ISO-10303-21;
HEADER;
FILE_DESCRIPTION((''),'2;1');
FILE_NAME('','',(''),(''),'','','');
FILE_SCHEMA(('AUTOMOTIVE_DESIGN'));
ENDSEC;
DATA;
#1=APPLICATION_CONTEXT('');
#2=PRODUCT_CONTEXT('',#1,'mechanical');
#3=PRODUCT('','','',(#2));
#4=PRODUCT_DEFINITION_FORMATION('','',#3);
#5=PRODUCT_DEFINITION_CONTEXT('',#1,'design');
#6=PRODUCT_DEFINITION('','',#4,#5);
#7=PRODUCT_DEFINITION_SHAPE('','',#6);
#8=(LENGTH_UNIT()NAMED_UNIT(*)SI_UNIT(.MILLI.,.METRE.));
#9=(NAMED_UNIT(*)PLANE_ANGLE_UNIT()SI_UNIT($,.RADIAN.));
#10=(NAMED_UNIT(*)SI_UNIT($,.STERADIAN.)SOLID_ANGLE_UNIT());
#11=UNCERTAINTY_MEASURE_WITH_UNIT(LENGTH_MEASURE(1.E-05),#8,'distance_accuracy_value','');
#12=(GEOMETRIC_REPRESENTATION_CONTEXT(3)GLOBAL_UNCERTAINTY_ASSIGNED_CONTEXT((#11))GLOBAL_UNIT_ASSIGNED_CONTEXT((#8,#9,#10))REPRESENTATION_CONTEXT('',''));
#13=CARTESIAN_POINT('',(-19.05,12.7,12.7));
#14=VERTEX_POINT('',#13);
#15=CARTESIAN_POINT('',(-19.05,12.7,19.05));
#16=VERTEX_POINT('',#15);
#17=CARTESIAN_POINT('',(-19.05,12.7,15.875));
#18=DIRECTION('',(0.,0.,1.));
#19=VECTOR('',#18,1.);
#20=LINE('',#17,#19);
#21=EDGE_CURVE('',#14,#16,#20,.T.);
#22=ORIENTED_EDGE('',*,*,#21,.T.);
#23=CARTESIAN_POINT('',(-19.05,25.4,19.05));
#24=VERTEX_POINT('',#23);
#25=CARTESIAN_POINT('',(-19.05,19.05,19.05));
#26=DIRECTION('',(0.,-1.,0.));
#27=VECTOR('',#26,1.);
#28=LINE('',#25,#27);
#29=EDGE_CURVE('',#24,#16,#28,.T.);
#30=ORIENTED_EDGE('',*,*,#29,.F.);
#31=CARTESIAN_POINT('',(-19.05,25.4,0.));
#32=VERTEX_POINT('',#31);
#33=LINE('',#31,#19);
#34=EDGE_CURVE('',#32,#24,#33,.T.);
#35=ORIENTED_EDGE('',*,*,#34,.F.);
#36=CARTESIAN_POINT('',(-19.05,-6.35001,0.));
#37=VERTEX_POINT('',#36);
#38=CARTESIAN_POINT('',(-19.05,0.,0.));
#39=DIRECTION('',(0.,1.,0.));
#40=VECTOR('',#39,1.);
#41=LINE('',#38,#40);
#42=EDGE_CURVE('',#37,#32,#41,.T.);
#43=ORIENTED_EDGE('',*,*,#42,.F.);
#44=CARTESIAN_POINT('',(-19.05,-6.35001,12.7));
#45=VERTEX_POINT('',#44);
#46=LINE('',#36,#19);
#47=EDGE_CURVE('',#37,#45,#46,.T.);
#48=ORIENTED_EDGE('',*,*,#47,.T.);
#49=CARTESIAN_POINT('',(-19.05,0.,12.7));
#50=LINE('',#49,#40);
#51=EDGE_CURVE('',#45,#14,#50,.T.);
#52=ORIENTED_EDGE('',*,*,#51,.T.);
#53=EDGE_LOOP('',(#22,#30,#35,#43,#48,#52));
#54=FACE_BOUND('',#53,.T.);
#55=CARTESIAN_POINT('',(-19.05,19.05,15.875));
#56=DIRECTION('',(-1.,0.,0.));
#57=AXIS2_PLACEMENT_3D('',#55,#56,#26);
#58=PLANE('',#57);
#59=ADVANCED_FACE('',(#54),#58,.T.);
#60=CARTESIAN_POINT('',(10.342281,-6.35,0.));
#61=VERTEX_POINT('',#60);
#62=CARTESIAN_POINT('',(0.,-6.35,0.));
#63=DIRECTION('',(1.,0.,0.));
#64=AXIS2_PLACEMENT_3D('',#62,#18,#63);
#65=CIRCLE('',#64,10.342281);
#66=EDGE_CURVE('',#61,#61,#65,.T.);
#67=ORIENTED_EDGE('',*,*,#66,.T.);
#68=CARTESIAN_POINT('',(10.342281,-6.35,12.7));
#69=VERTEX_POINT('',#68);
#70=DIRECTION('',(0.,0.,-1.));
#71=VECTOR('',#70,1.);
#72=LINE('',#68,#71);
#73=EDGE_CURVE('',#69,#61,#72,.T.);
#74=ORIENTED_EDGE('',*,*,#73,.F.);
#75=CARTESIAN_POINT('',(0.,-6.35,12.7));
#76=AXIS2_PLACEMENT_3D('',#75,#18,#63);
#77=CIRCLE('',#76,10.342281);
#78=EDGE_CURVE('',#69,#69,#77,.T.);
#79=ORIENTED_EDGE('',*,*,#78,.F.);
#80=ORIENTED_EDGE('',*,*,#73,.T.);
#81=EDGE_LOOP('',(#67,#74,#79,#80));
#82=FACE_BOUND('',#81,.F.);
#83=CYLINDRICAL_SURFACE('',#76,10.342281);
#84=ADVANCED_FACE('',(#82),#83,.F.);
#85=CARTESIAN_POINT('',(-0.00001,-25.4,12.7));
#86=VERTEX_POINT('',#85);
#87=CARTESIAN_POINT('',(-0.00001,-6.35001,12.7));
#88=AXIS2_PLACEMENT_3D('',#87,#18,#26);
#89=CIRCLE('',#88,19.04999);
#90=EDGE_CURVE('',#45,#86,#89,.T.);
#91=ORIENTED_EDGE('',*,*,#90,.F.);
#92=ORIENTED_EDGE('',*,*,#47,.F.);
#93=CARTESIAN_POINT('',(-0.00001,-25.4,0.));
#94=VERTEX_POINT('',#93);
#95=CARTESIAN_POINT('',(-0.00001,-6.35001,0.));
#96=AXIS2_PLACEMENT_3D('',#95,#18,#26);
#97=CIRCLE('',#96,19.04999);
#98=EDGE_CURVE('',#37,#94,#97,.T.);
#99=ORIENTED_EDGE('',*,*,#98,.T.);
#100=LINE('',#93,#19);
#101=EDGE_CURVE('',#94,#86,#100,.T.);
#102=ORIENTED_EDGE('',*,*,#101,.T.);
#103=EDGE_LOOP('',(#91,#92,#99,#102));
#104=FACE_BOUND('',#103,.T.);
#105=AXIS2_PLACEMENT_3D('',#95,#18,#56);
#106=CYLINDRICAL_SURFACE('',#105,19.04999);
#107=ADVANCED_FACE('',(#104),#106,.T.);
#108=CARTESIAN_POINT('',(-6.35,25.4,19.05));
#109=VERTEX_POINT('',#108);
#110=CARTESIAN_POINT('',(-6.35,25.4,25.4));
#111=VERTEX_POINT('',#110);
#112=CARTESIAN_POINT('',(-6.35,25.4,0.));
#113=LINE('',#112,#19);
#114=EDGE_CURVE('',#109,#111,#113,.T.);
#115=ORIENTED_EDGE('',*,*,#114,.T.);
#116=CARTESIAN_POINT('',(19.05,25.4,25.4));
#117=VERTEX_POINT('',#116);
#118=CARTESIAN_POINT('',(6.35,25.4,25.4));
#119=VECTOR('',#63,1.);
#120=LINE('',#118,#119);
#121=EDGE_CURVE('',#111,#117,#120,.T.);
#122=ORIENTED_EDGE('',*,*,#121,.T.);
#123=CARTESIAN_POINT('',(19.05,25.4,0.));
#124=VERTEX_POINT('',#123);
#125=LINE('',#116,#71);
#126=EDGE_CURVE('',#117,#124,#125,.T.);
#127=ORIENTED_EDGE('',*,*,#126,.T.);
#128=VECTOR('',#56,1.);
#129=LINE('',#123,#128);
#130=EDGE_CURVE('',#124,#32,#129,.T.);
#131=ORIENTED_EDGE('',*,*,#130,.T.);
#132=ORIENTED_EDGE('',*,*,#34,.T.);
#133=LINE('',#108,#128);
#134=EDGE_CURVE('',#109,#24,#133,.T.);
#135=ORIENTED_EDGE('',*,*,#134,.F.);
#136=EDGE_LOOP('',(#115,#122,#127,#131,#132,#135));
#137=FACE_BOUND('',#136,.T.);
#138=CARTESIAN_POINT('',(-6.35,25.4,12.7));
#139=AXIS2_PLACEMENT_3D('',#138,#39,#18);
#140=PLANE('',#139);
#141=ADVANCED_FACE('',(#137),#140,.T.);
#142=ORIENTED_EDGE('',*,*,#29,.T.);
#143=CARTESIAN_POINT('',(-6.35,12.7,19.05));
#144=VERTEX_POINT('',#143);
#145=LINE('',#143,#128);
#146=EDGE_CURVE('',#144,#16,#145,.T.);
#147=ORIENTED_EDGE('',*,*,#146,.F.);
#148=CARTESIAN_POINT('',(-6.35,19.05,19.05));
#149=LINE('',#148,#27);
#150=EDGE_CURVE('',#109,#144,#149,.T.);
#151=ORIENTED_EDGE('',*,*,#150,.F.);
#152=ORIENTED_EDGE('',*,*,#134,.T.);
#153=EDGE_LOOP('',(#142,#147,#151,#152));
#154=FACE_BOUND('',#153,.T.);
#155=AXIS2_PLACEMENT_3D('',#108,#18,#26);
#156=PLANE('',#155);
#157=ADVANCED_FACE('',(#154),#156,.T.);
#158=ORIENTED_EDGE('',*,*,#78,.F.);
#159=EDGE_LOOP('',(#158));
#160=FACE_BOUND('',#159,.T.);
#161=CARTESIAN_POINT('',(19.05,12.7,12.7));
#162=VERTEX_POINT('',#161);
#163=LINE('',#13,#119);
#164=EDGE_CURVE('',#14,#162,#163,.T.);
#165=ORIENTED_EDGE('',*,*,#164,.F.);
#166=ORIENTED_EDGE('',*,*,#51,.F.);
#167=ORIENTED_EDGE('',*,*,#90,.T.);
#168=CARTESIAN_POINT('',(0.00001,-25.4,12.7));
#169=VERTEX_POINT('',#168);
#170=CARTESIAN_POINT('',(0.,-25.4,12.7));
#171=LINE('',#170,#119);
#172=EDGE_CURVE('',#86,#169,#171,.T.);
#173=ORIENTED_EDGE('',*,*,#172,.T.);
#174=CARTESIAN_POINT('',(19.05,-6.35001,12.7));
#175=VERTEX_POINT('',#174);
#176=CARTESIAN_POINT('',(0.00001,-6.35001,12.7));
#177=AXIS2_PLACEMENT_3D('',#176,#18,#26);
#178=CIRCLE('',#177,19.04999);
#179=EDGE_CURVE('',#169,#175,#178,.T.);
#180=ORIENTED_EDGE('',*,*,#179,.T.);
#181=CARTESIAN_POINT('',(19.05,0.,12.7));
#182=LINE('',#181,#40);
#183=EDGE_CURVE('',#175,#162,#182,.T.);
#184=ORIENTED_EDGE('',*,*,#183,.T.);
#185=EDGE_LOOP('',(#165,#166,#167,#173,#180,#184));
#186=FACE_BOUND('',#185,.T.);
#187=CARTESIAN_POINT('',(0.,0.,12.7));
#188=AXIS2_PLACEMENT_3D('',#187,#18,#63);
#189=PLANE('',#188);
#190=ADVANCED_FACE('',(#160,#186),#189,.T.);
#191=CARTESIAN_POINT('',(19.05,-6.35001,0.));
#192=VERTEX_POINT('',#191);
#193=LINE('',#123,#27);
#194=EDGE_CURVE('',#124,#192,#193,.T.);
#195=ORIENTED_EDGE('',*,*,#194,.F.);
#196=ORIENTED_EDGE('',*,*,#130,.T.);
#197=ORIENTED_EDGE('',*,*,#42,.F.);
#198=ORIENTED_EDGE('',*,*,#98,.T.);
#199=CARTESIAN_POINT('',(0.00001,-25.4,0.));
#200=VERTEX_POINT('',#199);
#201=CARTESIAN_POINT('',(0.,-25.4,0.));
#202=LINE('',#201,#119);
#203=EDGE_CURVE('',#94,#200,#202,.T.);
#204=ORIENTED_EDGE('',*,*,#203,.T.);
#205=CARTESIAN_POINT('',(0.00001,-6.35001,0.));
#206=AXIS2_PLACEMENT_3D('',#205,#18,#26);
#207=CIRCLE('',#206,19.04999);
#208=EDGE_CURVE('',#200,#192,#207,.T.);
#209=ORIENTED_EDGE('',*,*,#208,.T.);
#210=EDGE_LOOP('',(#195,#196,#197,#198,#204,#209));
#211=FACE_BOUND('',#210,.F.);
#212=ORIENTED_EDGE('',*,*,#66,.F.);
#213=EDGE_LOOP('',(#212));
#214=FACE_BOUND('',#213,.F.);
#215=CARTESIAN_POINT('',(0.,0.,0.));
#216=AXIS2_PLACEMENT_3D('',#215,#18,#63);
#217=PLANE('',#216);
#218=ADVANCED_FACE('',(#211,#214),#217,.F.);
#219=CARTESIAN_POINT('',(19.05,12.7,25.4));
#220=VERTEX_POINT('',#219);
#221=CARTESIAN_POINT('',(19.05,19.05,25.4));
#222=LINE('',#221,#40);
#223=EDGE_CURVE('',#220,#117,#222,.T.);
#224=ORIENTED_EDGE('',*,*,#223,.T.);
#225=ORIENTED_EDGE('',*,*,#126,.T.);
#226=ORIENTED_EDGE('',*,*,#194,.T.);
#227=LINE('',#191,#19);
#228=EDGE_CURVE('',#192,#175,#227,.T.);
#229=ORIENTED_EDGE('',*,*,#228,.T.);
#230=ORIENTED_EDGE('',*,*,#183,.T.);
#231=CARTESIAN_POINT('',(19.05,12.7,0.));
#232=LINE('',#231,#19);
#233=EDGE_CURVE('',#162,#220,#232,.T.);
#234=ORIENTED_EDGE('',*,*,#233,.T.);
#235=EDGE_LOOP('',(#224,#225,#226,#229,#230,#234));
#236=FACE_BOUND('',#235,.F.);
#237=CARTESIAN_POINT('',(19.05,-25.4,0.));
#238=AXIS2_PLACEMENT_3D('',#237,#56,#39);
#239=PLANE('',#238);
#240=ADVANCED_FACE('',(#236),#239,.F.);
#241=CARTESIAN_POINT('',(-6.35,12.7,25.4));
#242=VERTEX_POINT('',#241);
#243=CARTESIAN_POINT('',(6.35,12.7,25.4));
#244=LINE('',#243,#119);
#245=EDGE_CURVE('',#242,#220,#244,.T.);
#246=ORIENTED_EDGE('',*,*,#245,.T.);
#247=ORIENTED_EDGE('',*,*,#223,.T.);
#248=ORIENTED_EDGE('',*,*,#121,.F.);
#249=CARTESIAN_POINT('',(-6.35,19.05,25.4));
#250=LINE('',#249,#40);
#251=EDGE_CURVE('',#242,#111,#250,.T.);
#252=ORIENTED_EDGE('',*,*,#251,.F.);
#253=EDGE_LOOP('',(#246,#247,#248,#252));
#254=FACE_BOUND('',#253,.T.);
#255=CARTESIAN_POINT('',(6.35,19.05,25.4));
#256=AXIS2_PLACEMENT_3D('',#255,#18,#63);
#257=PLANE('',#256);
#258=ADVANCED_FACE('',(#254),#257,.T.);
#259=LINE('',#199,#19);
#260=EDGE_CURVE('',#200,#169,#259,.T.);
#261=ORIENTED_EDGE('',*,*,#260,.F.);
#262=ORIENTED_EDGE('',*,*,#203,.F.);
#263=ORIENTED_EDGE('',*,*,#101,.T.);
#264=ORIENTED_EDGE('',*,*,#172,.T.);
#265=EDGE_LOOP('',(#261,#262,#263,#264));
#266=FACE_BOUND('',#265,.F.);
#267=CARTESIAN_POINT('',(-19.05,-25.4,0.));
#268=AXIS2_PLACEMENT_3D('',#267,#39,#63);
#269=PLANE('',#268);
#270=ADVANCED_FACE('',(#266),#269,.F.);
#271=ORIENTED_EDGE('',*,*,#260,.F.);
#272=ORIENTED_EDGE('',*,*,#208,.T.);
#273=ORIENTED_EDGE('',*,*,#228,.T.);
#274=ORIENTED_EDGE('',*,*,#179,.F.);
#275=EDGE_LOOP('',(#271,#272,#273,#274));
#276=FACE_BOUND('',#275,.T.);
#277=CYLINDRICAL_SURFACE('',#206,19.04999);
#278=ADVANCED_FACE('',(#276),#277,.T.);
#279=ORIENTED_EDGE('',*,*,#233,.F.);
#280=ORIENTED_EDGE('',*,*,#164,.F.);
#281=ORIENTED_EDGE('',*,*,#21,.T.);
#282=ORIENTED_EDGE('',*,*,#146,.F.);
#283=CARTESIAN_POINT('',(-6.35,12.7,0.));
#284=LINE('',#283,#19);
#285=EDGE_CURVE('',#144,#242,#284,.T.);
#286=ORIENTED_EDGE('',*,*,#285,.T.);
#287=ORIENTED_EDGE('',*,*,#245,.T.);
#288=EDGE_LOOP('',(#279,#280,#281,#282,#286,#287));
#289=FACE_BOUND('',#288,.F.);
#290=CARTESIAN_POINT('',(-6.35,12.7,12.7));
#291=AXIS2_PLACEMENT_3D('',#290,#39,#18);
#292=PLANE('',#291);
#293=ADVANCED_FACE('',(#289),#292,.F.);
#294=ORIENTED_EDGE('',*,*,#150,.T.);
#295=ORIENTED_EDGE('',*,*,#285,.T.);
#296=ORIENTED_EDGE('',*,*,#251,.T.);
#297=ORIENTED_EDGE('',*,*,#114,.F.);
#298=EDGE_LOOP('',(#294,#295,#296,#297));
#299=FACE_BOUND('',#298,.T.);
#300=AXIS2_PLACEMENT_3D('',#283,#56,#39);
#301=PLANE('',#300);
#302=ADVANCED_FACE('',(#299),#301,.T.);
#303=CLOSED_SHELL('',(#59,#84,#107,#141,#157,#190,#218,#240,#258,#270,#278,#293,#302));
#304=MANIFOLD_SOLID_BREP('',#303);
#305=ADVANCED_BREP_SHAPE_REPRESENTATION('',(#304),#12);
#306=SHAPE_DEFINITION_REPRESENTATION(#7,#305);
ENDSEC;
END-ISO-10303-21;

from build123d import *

# Parameters (mm, degrees)
F1_W     = 25.4
F1_H     = 12.7
F2_DEPTH = 25.4
F0_W     = 38.1
F0_H     = 50.8
F3_DEPTH = 12.7
F4_R     = 10.3422808599
F5_DEPTH = 12.701
F6_R     = 19.04999
F7_W     = 12.7
F7_H     = 6.35
F8_DEPTH = 12.7


# Not quite as in the source:
# - a fillet or chamfer is up to 0.001 mm smaller than in the source, because OpenCascade refuses the exact size


with BuildPart() as f2:
    # F1 (on face) → F2 (new body)
    with BuildSketch(Plane.XY):
        with Locations((6.35, 19.05)):
            Rectangle(F1_W, F1_H)
    extrude(amount=F2_DEPTH)

    # F0 (on Top) → F3 (join)
    with BuildSketch(Plane.XY):
        Rectangle(F0_W, F0_H)
    extrude(amount=F3_DEPTH)

    # F4 (on face) → F5 (cut, through all)
    with BuildSketch(Plane.XY.offset(12.7)):
        with Locations((0, -6.35)):
            Circle(F4_R)
    extrude(amount=-F5_DEPTH, mode=Mode.SUBTRACT)

    # F6 (radius 19.05 in the source; OpenCascade refuses exactly that, so slightly less here)
    f6_edges = [f2.edges().sort_by_distance(p)[0] for p in [
        (-19.05, -25.4, 6.35),
        (19.05, -25.4, 6.35),
    ]]
    fillet(f6_edges, radius=F6_R)

    # F7 (on face) → F8 (join)
    with BuildSketch(Plane(origin=(-6.35, 0, 0), x_dir=(0, -1, 0), z_dir=(-1, 0, 0))):
        with Locations((-19.05, 15.875)):
            Rectangle(F7_W, F7_H)
    extrude(amount=F8_DEPTH)


solid = f2.part
